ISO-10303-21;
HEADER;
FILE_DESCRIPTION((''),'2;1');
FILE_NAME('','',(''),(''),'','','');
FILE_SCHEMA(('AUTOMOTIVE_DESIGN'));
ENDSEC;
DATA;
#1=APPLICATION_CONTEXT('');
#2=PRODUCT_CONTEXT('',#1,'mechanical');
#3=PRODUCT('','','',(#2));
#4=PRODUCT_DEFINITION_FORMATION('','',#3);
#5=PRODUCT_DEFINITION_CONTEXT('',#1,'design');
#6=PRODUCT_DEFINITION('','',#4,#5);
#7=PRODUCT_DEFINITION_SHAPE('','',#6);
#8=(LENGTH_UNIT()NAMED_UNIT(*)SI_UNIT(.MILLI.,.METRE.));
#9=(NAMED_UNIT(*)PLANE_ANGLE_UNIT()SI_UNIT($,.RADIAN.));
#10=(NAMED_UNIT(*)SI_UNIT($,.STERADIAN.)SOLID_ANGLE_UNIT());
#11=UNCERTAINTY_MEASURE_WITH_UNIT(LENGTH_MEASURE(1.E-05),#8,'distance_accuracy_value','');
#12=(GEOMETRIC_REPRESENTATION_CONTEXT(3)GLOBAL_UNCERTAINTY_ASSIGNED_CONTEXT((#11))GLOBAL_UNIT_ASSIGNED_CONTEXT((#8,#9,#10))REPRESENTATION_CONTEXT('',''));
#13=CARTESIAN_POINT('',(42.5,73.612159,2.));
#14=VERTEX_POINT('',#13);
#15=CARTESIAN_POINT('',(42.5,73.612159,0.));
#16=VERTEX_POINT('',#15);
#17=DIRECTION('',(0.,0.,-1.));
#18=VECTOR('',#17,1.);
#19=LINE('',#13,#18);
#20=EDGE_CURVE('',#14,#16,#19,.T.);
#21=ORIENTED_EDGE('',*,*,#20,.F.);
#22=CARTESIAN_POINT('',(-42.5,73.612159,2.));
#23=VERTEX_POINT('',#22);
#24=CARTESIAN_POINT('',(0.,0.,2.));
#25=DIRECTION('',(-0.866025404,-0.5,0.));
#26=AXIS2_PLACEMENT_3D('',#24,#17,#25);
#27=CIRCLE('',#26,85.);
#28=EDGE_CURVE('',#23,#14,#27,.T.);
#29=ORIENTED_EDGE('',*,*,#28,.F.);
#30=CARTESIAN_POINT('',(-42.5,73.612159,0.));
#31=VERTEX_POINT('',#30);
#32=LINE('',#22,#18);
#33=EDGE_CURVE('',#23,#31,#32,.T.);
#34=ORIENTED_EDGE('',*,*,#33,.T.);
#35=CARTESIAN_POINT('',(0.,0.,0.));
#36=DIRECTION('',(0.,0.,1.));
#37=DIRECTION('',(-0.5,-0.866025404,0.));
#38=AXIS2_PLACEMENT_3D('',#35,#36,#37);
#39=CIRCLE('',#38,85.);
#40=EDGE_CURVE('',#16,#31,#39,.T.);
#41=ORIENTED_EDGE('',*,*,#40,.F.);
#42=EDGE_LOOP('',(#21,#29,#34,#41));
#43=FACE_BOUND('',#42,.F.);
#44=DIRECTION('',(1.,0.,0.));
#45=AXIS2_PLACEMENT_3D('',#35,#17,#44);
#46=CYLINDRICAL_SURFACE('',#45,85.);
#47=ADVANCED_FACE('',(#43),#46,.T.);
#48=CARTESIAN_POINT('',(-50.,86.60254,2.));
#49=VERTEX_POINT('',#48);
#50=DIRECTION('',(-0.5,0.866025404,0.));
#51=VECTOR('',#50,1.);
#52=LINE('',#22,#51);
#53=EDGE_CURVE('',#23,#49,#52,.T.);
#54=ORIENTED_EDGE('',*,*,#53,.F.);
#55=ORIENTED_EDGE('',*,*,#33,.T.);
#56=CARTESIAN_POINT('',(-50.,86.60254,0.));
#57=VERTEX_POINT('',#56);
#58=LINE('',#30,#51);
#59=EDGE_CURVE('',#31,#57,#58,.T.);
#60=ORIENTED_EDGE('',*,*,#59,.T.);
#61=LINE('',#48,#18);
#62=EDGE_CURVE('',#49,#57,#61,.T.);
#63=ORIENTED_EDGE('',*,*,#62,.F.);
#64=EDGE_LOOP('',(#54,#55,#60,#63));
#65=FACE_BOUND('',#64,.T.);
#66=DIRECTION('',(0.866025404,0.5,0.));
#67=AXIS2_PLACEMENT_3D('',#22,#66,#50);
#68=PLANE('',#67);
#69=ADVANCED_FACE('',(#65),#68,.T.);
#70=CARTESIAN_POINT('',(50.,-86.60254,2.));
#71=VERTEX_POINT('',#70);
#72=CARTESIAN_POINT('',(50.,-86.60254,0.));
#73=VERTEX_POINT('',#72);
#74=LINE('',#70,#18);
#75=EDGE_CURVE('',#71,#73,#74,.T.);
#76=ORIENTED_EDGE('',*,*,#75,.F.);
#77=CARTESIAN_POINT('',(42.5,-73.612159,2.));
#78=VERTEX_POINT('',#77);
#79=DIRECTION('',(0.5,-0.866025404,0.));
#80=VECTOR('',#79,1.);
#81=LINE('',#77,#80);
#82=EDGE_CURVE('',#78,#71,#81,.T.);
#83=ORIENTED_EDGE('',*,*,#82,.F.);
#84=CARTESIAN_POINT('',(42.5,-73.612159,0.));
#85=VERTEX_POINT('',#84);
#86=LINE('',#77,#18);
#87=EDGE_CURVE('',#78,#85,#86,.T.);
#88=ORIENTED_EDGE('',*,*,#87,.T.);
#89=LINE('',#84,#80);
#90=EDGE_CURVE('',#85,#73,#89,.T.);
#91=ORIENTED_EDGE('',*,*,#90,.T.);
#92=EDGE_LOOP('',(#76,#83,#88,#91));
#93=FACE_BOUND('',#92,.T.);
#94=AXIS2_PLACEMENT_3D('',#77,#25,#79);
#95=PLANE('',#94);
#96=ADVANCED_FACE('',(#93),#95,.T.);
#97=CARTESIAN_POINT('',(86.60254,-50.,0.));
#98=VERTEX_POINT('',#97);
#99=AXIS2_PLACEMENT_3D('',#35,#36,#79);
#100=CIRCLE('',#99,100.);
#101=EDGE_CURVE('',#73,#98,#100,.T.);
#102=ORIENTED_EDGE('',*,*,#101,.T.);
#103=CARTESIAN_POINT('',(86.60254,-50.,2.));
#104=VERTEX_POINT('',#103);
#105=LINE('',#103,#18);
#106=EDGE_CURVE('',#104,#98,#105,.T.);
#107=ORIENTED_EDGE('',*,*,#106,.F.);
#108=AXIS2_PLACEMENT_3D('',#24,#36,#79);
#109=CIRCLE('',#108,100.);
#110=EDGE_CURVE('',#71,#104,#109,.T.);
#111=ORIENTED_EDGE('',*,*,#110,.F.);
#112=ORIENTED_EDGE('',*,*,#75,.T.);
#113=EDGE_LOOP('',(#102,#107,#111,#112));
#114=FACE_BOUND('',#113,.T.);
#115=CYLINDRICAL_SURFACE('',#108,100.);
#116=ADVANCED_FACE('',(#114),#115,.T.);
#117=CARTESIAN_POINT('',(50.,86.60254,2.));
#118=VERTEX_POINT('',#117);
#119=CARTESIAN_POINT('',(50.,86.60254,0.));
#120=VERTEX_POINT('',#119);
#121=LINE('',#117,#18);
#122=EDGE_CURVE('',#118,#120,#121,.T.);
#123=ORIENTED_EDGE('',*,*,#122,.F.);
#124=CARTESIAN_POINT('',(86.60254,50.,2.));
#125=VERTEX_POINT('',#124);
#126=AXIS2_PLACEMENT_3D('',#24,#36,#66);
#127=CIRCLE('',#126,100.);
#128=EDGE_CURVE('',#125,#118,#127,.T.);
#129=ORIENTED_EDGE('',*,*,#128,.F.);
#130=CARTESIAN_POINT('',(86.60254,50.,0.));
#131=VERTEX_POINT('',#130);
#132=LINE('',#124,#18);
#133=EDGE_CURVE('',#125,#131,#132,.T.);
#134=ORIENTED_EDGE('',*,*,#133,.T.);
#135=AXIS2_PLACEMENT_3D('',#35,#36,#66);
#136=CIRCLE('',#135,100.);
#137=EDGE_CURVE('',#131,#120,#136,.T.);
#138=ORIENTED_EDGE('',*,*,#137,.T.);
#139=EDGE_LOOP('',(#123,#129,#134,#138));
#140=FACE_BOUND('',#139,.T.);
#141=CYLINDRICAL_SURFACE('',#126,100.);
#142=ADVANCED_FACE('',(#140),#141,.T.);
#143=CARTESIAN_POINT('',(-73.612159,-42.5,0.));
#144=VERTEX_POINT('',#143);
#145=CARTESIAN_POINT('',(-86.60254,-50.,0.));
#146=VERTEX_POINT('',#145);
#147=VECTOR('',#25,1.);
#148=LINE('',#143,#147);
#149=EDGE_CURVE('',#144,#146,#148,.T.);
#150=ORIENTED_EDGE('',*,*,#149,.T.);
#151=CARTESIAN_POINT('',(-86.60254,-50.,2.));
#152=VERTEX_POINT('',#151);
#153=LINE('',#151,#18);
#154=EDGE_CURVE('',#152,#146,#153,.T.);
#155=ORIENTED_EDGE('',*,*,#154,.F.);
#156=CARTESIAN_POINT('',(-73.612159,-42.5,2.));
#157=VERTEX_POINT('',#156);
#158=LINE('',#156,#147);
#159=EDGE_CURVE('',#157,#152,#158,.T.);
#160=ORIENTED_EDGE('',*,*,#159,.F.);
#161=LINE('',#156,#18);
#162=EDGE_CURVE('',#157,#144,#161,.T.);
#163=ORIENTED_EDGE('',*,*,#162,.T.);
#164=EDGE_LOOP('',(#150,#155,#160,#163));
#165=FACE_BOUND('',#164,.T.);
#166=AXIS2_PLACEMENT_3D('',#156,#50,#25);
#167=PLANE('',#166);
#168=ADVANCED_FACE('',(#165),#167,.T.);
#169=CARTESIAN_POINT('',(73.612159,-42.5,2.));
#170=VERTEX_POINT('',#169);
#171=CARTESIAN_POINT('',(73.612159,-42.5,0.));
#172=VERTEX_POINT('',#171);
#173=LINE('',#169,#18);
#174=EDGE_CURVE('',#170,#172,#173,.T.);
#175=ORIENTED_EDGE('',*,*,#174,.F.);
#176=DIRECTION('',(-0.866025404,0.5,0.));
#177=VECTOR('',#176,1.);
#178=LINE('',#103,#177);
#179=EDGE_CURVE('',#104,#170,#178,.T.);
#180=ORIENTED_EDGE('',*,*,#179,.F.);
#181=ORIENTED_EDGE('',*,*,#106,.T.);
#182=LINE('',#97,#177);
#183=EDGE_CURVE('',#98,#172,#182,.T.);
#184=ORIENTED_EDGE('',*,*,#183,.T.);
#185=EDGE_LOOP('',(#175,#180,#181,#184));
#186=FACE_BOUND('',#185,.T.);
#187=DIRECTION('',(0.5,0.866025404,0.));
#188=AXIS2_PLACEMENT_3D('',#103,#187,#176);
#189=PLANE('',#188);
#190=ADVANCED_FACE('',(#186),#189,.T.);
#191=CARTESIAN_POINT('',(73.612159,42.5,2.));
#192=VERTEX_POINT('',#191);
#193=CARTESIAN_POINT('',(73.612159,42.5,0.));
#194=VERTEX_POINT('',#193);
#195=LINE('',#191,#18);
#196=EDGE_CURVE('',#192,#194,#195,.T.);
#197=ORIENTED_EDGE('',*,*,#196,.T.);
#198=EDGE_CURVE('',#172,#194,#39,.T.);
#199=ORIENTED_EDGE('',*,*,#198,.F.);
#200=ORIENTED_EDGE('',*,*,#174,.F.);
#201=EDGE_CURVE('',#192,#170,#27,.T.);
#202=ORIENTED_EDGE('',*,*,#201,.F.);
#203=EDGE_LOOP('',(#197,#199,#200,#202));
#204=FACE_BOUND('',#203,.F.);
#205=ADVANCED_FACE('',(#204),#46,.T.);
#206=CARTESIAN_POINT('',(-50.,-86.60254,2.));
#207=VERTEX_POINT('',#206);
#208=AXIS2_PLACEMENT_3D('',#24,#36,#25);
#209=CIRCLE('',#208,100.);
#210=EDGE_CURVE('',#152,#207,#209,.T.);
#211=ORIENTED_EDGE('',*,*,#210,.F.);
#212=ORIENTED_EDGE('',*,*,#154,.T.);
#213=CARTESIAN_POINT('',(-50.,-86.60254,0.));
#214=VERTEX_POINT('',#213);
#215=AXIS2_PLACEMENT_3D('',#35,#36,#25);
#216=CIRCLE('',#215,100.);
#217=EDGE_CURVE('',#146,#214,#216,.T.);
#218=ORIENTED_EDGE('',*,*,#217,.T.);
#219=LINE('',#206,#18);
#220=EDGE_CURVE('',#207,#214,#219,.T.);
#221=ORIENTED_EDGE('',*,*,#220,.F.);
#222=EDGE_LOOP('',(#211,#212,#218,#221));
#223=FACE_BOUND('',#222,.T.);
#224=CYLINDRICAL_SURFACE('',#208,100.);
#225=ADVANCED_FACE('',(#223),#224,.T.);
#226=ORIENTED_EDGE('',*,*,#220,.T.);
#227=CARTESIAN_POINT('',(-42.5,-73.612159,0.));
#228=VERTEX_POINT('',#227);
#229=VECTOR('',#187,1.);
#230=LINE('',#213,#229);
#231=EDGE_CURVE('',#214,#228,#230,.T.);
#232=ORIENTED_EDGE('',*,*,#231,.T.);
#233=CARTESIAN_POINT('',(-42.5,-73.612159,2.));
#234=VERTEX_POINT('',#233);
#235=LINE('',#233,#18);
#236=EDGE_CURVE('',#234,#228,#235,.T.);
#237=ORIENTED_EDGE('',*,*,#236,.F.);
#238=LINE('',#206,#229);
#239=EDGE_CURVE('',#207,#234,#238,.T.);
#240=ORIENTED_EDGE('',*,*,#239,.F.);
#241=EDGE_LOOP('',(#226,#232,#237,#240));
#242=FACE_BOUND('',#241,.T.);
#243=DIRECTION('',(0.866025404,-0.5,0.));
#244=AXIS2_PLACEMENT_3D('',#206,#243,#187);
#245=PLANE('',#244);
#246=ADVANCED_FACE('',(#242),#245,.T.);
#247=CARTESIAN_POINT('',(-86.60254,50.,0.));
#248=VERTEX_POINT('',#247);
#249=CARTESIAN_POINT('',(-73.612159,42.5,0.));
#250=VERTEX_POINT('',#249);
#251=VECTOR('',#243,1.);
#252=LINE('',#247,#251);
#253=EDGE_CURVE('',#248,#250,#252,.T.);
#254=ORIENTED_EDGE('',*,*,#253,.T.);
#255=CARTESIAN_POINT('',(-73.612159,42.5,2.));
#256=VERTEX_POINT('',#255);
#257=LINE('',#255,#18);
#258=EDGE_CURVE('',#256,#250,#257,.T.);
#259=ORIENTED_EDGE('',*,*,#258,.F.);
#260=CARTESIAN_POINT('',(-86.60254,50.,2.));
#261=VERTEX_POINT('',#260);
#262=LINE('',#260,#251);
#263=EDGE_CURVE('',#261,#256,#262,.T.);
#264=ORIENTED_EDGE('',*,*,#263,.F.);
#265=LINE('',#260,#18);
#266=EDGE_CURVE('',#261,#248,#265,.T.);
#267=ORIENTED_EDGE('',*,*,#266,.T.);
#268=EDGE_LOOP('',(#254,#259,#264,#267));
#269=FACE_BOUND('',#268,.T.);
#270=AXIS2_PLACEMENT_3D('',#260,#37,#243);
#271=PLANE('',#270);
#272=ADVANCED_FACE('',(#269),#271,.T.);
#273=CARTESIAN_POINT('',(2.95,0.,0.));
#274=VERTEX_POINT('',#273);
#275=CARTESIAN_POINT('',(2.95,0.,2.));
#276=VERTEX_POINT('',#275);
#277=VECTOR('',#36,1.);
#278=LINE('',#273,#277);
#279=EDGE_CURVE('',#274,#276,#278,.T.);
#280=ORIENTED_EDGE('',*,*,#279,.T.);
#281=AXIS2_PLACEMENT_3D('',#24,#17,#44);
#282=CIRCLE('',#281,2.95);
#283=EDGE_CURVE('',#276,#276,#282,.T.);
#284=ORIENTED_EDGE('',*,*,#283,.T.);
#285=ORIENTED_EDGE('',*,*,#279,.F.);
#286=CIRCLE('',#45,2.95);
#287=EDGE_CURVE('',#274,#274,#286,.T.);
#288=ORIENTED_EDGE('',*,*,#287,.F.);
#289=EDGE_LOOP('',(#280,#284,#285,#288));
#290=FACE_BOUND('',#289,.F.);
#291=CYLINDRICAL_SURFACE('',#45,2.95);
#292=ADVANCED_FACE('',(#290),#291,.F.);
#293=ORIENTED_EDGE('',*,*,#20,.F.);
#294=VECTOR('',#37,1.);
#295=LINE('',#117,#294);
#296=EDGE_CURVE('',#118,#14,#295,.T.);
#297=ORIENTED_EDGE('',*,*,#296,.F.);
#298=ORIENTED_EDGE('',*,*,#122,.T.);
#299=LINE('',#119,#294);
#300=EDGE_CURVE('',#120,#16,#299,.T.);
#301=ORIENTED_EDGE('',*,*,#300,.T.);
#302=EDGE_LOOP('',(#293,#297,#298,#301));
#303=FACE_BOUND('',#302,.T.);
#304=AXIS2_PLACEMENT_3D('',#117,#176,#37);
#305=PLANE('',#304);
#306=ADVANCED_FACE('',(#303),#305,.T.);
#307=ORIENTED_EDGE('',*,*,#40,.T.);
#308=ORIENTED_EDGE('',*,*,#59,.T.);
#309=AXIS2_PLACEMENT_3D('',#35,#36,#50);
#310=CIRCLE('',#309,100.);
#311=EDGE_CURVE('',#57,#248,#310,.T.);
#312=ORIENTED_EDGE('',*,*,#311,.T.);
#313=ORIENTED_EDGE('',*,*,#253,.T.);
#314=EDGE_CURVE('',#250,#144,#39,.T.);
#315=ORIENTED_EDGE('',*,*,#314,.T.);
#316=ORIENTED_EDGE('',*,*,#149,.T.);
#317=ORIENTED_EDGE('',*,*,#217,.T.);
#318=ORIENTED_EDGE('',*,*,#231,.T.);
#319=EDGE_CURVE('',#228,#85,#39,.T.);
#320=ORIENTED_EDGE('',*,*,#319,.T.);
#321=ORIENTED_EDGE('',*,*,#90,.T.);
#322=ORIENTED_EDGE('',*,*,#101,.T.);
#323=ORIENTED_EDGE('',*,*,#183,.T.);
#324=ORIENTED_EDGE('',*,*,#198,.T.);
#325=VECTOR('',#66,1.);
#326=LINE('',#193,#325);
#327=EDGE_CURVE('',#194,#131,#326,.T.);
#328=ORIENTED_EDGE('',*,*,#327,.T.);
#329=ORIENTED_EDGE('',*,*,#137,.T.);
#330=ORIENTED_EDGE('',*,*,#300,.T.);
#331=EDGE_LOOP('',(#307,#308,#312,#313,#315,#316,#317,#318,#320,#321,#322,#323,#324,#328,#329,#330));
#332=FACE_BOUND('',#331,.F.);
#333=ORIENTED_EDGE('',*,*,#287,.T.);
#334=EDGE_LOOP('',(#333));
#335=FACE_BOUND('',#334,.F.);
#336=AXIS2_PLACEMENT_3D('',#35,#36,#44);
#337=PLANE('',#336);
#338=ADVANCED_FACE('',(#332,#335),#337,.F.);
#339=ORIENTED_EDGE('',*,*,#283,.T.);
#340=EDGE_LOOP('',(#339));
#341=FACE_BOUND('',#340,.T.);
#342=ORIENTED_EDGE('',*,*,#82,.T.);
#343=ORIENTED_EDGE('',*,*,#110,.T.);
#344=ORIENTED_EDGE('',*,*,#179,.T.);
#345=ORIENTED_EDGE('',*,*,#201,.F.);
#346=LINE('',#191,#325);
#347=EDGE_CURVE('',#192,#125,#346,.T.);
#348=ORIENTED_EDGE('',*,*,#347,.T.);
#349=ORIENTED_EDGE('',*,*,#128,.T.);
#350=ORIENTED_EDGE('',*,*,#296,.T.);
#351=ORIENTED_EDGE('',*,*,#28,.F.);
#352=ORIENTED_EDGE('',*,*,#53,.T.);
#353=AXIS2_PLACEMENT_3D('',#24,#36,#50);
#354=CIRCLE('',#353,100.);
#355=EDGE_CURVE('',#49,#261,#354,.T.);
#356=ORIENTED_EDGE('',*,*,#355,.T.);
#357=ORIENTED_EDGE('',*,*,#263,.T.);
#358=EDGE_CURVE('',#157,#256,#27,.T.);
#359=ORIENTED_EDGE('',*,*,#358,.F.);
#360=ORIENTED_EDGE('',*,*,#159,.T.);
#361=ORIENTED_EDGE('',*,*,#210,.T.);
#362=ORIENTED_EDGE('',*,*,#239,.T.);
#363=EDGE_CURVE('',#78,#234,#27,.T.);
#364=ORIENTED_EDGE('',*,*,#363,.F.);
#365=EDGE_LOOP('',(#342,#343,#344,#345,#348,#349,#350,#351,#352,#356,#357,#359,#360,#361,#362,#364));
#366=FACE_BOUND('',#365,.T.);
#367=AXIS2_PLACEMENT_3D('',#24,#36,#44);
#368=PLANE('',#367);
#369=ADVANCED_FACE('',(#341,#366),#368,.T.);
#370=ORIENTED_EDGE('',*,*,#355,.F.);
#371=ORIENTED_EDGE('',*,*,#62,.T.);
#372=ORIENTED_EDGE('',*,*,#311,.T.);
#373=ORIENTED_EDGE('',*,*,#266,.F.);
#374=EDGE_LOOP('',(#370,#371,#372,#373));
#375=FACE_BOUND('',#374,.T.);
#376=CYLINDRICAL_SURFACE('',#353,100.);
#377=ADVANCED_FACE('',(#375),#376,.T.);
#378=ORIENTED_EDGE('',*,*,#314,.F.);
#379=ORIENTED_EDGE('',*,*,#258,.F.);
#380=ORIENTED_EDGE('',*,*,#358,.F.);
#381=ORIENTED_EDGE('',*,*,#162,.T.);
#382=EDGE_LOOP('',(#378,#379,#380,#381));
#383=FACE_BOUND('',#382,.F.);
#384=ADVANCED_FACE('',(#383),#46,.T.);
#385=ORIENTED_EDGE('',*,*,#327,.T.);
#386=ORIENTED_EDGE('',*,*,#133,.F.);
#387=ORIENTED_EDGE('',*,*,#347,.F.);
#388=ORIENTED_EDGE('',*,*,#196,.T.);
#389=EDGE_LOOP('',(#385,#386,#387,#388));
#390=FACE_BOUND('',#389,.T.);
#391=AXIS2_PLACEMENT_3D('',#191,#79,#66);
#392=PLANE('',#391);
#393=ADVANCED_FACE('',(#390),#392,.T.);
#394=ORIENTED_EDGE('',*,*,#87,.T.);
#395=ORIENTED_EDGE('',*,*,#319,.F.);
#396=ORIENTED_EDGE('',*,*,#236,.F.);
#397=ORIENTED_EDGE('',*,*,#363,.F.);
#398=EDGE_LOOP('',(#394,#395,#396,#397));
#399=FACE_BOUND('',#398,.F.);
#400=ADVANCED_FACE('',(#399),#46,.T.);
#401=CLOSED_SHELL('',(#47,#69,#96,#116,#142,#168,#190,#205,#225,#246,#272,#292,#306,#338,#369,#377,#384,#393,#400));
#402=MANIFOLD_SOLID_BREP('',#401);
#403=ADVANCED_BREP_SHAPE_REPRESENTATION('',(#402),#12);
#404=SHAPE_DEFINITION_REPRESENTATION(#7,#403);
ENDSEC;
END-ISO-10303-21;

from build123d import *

# Parameters (mm, degrees)
F0_R            = 85
F1_DEPTH        = 2
F3_DEPTH        = 2
F3_COPIES_COUNT = 4
F4_R            = 2.95
F5_DEPTH        = 25


# Not quite as in the source:
# - a pattern or mirror of a feature is missing from the dataset's text; its kind, count and spacing are read off the source's solid
# - a feature names something its author has since deleted; it is built from what else it names


with BuildPart() as f1:
    # F0 (on Top) → F1 (new body)
    with BuildSketch(Plane.XY):
        Circle(F0_R)
    extrude(amount=F1_DEPTH)

    # F2 (on face) → F3 (join)
    with BuildSketch(Plane.XY.offset(2)):
        with BuildLine():
            ThreePointArc((-42.5, -73.6121593217), (-60.1040764009, -60.1040764009), (-73.6121593217, -42.5))
            Line((-73.6121593217, -42.5), (-86.6025403784, -50))
            ThreePointArc((-86.6025403784, -50), (-70.7106781187, -70.7106781187), (-50, -86.6025403784))
            Line((-50, -86.6025403784), (-42.5, -73.6121593217))
        make_face()
    f3 = extrude(amount=-F3_DEPTH)

    # F3_copies: F3 ×4 about axis
    f3_copies_axis = Axis((0, 0, 0), (0, 0, 1))
    for i in range(1, F3_COPIES_COUNT):
        add(f3.rotate(f3_copies_axis, i * 360 / F3_COPIES_COUNT))

    # F4 (on face) → F5 (cut)
    with BuildSketch(Plane(origin=(0, 0, 0), x_dir=(1, 0, 0), z_dir=(0, 0, -1))):
        Circle(F4_R)
    extrude(amount=-F5_DEPTH, mode=Mode.SUBTRACT)


solid = f1.part
